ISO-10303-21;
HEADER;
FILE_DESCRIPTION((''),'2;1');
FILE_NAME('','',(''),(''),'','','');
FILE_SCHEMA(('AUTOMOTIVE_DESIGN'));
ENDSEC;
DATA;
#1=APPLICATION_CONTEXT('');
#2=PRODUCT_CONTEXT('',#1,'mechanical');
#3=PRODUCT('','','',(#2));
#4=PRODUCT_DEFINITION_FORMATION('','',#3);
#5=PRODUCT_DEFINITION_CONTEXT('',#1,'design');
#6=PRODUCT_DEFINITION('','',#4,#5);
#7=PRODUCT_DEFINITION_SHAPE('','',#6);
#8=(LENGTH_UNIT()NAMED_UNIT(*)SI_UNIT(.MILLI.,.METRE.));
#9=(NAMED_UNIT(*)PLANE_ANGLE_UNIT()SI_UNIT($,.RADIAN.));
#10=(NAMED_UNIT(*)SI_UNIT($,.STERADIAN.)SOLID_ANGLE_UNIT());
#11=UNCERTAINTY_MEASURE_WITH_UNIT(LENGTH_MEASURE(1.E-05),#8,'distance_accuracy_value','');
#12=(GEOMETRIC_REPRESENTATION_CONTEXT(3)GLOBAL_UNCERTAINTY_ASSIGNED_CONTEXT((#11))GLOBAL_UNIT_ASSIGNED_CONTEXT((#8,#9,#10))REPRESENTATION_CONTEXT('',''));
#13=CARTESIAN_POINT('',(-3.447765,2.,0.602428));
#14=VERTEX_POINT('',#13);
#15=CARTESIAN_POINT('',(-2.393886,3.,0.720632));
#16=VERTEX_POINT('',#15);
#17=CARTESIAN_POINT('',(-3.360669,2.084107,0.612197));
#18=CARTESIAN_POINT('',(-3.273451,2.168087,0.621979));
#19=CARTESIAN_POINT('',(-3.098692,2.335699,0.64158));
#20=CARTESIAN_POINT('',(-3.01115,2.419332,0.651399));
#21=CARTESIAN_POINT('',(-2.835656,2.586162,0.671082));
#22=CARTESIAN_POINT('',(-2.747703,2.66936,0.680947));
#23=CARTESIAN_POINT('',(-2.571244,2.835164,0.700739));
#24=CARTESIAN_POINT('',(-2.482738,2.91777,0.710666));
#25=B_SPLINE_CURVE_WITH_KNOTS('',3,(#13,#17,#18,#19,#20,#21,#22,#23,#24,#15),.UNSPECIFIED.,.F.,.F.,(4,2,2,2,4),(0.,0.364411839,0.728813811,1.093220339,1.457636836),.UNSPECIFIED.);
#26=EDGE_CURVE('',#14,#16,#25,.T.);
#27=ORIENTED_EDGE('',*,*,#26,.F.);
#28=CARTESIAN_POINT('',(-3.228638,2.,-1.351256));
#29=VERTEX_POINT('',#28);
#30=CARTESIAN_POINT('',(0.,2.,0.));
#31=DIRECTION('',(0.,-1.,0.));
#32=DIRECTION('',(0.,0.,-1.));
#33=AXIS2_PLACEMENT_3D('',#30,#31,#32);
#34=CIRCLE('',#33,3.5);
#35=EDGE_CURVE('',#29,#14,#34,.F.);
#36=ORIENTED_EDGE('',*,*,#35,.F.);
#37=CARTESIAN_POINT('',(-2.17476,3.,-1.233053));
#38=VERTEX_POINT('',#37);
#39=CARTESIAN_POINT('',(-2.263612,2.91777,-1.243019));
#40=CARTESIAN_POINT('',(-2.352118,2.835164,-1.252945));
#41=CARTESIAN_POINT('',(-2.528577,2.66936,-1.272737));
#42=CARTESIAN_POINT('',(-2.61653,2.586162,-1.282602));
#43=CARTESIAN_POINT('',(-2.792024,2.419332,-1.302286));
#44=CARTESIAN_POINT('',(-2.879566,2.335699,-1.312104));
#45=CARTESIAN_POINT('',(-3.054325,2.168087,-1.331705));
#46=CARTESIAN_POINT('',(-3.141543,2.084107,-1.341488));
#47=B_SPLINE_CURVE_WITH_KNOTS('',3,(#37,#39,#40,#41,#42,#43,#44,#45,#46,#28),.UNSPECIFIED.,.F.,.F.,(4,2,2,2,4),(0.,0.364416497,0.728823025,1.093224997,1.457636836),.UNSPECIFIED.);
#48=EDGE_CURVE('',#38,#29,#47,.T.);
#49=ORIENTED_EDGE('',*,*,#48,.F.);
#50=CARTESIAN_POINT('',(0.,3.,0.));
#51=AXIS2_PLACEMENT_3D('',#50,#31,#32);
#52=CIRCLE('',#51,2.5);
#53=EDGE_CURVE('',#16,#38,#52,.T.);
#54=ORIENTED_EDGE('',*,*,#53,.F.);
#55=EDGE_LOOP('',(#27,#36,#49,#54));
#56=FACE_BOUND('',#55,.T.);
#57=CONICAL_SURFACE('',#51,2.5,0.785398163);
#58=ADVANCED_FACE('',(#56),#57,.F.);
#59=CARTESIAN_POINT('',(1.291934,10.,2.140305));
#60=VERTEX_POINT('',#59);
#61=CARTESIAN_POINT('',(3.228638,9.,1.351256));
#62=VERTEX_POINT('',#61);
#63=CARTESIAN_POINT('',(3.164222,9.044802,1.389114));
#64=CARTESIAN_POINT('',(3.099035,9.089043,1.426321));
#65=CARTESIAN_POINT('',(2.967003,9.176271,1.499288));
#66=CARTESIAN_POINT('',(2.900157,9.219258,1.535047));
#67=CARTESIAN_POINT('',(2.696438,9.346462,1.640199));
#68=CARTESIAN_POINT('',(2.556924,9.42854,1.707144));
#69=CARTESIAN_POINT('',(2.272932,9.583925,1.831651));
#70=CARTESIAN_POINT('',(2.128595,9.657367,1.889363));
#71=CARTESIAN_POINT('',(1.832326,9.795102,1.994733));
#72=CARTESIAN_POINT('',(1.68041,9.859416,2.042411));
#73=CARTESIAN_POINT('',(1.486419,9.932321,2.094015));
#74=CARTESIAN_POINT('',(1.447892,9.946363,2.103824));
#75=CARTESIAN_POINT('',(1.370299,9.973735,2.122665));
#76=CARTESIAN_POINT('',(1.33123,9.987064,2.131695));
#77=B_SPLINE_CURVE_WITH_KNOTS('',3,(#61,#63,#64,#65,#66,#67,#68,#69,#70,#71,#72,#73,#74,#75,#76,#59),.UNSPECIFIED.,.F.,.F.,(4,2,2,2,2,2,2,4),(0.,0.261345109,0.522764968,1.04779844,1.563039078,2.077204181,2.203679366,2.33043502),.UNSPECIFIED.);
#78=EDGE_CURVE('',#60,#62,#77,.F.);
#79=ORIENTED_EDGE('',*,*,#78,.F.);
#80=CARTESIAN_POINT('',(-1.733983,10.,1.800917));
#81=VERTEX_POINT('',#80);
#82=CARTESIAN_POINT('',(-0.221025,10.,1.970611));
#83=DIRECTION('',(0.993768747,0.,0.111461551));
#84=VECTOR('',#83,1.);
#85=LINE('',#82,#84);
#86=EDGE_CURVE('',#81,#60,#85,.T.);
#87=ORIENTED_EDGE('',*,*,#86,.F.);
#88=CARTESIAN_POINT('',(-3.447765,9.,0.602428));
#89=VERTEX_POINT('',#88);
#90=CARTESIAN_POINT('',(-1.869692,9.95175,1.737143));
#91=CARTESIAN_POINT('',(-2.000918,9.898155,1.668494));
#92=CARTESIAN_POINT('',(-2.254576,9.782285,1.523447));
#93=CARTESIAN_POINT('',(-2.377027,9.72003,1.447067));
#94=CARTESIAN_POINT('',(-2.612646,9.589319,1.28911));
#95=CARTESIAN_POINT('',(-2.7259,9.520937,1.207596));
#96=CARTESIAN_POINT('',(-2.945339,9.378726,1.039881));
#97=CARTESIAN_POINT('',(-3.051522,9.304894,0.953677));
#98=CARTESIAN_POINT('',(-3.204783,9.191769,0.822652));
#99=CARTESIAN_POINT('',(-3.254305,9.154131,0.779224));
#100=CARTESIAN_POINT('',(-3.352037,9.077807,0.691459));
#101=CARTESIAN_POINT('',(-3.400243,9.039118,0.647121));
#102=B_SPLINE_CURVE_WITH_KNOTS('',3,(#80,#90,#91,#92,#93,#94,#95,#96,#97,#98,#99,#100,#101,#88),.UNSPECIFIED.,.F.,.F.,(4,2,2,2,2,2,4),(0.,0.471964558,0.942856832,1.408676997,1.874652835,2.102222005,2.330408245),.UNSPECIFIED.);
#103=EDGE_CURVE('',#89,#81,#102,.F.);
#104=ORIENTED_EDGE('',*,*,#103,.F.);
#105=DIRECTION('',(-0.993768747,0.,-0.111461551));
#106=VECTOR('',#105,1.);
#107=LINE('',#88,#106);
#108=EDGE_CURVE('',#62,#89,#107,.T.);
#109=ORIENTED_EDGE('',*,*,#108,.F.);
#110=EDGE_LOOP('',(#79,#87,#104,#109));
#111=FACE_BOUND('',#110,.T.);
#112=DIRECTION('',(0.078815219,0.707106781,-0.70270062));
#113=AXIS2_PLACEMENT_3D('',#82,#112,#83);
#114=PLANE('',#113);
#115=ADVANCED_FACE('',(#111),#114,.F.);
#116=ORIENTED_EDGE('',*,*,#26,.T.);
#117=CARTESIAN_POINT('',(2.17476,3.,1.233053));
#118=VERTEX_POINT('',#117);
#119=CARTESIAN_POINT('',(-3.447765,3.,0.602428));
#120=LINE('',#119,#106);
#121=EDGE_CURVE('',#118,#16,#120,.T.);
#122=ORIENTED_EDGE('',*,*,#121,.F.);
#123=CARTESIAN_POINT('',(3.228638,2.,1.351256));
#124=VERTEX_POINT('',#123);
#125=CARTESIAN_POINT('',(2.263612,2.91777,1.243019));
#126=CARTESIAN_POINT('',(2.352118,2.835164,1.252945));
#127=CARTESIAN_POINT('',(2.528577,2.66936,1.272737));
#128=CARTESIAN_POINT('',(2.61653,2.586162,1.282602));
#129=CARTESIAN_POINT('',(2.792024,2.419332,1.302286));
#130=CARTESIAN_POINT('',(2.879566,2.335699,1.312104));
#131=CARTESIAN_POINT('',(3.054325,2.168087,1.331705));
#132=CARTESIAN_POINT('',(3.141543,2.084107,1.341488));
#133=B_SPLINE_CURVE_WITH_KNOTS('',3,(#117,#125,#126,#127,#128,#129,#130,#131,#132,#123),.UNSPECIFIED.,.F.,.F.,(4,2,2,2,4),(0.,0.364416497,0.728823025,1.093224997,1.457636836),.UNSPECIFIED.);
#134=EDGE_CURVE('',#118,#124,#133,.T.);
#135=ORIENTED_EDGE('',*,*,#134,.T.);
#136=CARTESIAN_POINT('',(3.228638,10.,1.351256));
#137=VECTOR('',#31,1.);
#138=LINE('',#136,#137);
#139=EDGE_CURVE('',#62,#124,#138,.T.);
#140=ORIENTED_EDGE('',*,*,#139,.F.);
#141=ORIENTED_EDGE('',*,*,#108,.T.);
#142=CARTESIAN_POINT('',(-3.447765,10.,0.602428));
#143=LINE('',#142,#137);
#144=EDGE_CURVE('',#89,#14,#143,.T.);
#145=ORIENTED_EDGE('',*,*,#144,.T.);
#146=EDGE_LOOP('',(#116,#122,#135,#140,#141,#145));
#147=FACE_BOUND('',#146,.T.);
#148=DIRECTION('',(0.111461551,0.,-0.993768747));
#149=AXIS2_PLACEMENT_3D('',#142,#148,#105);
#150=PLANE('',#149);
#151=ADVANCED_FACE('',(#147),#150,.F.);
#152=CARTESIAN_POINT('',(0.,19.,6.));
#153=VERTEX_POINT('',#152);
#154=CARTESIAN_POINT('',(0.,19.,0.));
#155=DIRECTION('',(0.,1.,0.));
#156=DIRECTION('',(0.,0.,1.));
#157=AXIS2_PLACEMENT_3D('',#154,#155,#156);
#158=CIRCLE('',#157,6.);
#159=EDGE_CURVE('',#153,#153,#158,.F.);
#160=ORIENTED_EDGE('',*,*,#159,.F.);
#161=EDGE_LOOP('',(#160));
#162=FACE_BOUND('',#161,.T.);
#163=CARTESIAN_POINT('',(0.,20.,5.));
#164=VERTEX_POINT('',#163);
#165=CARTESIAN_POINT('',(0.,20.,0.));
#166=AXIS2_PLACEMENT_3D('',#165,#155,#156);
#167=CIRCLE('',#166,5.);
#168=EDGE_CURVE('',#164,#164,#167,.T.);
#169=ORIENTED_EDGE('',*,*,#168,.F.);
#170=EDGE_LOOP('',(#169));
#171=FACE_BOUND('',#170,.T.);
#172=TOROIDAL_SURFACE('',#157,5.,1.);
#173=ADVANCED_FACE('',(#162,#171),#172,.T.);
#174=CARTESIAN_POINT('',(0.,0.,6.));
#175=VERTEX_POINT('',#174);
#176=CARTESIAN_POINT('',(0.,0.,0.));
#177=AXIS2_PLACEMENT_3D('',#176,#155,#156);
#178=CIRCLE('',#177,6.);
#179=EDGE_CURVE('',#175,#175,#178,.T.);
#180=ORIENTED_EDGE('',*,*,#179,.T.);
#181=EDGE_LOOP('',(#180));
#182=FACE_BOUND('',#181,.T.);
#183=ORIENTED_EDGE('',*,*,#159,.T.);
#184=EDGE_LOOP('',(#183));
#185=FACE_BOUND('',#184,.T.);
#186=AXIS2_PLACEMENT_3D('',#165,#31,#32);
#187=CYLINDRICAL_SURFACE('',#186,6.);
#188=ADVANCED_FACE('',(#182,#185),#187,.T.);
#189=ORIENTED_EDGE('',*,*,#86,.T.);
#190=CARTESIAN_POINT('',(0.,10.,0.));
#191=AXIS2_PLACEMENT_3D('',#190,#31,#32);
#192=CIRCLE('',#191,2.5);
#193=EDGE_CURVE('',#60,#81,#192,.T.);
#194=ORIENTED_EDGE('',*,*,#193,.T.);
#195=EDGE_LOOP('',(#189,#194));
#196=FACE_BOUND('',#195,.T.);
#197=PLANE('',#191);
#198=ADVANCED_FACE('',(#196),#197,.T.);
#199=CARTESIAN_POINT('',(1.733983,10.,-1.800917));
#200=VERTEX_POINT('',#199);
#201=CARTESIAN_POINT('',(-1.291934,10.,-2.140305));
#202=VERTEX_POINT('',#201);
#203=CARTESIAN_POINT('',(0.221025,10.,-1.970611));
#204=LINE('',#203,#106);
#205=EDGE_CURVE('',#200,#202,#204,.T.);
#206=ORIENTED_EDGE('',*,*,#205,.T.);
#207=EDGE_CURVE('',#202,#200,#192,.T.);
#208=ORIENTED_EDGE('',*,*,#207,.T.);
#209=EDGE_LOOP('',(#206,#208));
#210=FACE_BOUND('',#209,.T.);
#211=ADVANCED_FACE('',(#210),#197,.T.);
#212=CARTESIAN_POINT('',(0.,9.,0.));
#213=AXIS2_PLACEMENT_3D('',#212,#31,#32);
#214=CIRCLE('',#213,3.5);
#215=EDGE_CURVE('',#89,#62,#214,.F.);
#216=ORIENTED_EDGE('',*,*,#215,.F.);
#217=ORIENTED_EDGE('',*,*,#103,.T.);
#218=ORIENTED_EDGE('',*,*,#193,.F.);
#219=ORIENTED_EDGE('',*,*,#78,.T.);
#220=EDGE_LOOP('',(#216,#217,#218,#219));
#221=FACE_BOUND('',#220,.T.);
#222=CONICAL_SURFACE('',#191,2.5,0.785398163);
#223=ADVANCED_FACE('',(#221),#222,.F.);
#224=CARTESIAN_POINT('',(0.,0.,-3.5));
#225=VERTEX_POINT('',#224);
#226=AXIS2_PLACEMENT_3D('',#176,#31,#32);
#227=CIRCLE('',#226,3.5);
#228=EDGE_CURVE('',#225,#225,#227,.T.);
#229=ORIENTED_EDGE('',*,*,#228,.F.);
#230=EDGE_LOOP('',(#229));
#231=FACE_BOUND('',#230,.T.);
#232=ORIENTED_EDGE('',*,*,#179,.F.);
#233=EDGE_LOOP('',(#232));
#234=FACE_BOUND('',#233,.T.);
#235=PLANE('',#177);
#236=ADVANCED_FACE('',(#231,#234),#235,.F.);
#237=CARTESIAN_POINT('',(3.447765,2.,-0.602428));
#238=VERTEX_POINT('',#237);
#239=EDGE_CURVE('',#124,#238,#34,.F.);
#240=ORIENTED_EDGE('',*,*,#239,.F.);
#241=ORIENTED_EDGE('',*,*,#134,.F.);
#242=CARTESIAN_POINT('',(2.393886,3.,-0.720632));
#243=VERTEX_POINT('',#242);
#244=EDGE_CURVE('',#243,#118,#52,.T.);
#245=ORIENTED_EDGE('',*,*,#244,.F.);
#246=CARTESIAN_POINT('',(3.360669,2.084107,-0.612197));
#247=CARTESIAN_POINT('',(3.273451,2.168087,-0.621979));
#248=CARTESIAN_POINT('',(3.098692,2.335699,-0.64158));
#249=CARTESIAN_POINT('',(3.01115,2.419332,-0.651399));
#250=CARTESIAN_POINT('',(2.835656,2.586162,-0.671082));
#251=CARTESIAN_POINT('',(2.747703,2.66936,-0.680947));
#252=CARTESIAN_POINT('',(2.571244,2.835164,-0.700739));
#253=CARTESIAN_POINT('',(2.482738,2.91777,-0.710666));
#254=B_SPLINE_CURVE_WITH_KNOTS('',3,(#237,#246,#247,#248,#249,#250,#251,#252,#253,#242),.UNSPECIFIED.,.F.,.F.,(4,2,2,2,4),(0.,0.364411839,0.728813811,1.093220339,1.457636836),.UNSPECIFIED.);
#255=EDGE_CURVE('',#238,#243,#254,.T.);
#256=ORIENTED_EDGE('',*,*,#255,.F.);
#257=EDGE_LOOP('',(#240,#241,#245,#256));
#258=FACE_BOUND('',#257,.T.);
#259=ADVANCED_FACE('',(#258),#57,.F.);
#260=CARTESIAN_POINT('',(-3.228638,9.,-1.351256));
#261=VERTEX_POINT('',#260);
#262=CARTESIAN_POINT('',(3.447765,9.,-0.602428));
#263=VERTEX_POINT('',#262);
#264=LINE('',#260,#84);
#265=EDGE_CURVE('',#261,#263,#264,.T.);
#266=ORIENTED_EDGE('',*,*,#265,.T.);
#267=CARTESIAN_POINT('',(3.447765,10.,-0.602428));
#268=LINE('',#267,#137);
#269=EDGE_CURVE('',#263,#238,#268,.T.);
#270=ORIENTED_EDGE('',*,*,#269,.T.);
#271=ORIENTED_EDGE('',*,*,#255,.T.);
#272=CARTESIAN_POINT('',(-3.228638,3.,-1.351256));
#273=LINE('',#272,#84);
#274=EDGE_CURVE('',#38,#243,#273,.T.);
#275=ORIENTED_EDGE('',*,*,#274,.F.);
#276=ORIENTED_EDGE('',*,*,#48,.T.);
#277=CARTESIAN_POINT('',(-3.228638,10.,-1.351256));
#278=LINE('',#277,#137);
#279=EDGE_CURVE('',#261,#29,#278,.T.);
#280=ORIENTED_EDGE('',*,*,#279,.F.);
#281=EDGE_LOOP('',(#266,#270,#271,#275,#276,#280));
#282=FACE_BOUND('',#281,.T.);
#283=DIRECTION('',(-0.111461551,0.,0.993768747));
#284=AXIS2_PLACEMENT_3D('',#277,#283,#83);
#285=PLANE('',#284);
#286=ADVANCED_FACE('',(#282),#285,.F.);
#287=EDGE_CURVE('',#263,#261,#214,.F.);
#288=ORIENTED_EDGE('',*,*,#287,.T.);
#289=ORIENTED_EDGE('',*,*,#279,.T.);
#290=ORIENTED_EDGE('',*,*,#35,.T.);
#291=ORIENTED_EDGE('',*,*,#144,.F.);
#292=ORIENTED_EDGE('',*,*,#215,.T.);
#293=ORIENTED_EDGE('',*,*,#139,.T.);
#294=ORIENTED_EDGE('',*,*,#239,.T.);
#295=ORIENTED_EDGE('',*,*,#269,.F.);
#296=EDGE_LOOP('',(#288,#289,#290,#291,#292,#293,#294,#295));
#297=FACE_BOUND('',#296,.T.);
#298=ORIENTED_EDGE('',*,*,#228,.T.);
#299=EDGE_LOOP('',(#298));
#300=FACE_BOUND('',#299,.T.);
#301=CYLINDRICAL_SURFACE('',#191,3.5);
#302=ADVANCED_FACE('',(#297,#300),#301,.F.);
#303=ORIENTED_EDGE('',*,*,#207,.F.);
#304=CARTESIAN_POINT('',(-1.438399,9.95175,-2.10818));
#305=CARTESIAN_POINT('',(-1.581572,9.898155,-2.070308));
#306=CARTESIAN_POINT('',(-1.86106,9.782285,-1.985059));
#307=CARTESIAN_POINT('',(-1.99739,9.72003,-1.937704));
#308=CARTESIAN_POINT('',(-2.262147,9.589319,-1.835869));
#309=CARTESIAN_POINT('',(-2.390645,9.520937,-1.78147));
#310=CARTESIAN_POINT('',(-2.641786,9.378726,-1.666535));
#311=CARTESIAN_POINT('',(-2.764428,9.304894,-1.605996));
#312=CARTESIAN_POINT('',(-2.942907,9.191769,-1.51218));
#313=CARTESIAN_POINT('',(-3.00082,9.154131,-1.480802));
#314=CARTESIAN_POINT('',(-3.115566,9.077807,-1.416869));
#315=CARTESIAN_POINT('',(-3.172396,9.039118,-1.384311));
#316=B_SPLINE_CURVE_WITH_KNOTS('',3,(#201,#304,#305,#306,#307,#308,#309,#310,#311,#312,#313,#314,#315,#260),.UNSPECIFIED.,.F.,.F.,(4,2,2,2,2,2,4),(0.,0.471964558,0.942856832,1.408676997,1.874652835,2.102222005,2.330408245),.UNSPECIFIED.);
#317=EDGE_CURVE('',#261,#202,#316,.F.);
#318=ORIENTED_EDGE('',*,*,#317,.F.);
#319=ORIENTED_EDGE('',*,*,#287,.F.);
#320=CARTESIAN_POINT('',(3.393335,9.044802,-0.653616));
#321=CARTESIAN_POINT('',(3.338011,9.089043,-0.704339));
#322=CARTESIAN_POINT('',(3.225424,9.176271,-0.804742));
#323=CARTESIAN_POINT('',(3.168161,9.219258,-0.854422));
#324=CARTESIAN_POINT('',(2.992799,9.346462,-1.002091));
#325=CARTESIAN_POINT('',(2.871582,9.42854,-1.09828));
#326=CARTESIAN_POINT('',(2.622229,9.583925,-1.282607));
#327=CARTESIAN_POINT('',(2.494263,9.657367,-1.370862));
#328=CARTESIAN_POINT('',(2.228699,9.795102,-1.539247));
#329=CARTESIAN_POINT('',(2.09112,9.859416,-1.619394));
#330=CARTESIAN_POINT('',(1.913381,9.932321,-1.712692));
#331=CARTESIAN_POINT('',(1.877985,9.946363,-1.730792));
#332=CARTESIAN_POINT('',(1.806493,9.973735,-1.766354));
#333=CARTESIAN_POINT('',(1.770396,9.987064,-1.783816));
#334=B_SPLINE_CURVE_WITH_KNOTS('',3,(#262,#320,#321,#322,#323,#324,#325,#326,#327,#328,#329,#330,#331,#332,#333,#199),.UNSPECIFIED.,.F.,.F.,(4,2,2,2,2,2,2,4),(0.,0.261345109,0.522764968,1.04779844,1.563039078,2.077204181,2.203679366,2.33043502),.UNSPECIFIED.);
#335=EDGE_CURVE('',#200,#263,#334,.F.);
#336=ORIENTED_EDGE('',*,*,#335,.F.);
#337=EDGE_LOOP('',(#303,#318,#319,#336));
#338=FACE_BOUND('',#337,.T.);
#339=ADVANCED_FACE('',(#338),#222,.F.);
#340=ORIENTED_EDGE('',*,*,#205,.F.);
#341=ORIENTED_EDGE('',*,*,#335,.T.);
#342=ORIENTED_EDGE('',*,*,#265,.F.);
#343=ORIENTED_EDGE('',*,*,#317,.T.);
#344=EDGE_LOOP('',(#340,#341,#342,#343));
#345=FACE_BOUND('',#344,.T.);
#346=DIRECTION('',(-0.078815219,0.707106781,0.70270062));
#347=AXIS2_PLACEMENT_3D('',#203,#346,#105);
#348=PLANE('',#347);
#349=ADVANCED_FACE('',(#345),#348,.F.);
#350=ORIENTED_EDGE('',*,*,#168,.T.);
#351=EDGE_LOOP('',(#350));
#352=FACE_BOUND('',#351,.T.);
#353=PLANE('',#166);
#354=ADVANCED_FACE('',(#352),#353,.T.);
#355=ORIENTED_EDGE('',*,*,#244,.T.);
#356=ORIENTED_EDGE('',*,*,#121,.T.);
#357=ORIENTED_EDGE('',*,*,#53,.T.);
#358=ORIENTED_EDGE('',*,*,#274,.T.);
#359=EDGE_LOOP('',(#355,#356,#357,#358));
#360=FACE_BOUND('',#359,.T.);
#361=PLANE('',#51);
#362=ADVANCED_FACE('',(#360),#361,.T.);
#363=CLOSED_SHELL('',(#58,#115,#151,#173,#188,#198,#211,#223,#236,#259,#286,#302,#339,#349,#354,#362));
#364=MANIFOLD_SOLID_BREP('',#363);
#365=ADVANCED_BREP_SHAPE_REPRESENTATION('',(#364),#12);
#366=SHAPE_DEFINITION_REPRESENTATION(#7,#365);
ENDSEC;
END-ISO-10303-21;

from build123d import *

# Parameters (mm, degrees)
SKETCH1_R           = 6
BOSS_EXTRUDE1_DEPTH = 20
CUT_EXTRUDE1_DEPTH  = 10
CUT_EXTRUDE2_DEPTH  = 3
CHAMFER1_SIZE       = 1
CHAMFER2_SIZE       = 1
FILLET1_R           = 1


with BuildPart() as part:
    # Sketch1 → Boss-Extrude1 (new body)
    with BuildSketch(Plane(origin=(0, 0, 0), x_dir=(1, 0, 0), z_dir=(0, 1, 0))):
        with Locations(Location((0, 0, 0), (0, 0, 270))):
            Circle(SKETCH1_R)
    extrude(amount=BOSS_EXTRUDE1_DEPTH)

    # Sketch2 → Cut-Extrude1 (cut)
    with BuildSketch(Plane.XZ):
        with BuildLine():
            Line((-3.228638435, -1.351256398), (3.447764562, -0.602428024))
            ThreePointArc((3.447764562, -0.602428024), (0.390115429, -3.478190615), (-3.228638435, -1.351256398))
        make_face()
        with BuildLine():
            Line((-3.447764562, 0.602428024), (3.228638435, 1.351256398))
            ThreePointArc((3.228638435, 1.351256398), (-0.390115429, 3.478190615), (-3.447764562, 0.602428024))
        make_face()
    extrude(amount=-CUT_EXTRUDE1_DEPTH, mode=Mode.SUBTRACT)

    # Sketch3 → Cut-Extrude2 (cut)
    with BuildSketch(Plane.XZ):
        with BuildLine():
            Line((-3.447764562, 0.602428024), (3.228638435, 1.351256398))
            ThreePointArc((3.228638435, 1.351256398), (3.478190615, 0.390115429), (3.447764562, -0.602428024))
            Line((3.447764562, -0.602428024), (-3.228638435, -1.351256398))
            ThreePointArc((-3.228638435, -1.351256398), (-3.478190615, -0.390115429), (-3.447764562, 0.602428024))
        make_face()
    extrude(amount=-CUT_EXTRUDE2_DEPTH, mode=Mode.SUBTRACT)

    # Chamfer1
    chamfer1_edges = [part.edges().sort_by_distance(p)[0] for p in [
        (-0.390115429, 10, 3.478190615),
        (-0.109563063, 10, 0.976842211),
        (0.390115429, 10, -3.478190615),
        (0.109563063, 10, -0.976842211),
    ]]
    chamfer(chamfer1_edges, length=CHAMFER1_SIZE)

    # Chamfer2
    # the kernel refuses this chamfer: 1 mm, written as the material it adds along each edge
    with BuildSketch(Plane(origin=(0, 3, 0), x_dir=(-0.42559561828763903, 0, -0.9049134597818524), z_dir=(0.9049134597818524, 0, -0.42559561828763903))) as chamfer2_piece_1_section:
        Polygon((3.5, -CHAMFER2_SIZE), (3.5 - CHAMFER2_SIZE, 0), (3.5, 0), align=None)
    chamfer2_piece_1 = revolve(axis=Axis((0, 3, 0), (0, 1, 0)), revolution_arc=116.82411124, mode=Mode.PRIVATE)
    chamfer2_piece_1 = split(chamfer2_piece_1, bisect_by=Plane(origin=(-2.987774237, 2.670615871, -1.324240961), z_dir=(-0.11146155122457255, 0, 0.9937687470425964)), keep=Keep.TOP, mode=Mode.PRIVATE)
    chamfer2_piece_1 = split(chamfer2_piece_1, bisect_by=Plane(origin=(-3.206900364, 2.670615871, 0.629443462), z_dir=(0.11146155122457255, 0, -0.9937687470425964)), keep=Keep.TOP, mode=Mode.PRIVATE)
    add(chamfer2_piece_1)
    with BuildSketch(Plane(origin=(0, 3, 0), x_dir=(0.4255956182876634, 0, 0.904913459781841), z_dir=(-0.904913459781841, 0, 0.4255956182876634))) as chamfer2_piece_2_section:
        Polygon((3.5, -CHAMFER2_SIZE), (3.5 - CHAMFER2_SIZE, 0), (3.5, 0), align=None)
    chamfer2_piece_2 = revolve(axis=Axis((0, 3, 0), (0, 1, 0)), revolution_arc=116.82411124, mode=Mode.PRIVATE)
    chamfer2_piece_2 = split(chamfer2_piece_2, bisect_by=Plane(origin=(3.206900364, 2.670615871, -0.629443462), z_dir=(-0.11146155122457255, 0, 0.9937687470425964)), keep=Keep.TOP, mode=Mode.PRIVATE)
    chamfer2_piece_2 = split(chamfer2_piece_2, bisect_by=Plane(origin=(2.987774237, 2.670615871, 1.324240961), z_dir=(0.11146155122457255, 0, -0.9937687470425964)), keep=Keep.TOP, mode=Mode.PRIVATE)
    add(chamfer2_piece_2)

    # Fillet1
    fillet1_edges = [part.edges().sort_by_distance(p)[0] for p in [
        (0, 20, -6),
    ]]
    fillet(fillet1_edges, radius=FILLET1_R)


solid = part.part
